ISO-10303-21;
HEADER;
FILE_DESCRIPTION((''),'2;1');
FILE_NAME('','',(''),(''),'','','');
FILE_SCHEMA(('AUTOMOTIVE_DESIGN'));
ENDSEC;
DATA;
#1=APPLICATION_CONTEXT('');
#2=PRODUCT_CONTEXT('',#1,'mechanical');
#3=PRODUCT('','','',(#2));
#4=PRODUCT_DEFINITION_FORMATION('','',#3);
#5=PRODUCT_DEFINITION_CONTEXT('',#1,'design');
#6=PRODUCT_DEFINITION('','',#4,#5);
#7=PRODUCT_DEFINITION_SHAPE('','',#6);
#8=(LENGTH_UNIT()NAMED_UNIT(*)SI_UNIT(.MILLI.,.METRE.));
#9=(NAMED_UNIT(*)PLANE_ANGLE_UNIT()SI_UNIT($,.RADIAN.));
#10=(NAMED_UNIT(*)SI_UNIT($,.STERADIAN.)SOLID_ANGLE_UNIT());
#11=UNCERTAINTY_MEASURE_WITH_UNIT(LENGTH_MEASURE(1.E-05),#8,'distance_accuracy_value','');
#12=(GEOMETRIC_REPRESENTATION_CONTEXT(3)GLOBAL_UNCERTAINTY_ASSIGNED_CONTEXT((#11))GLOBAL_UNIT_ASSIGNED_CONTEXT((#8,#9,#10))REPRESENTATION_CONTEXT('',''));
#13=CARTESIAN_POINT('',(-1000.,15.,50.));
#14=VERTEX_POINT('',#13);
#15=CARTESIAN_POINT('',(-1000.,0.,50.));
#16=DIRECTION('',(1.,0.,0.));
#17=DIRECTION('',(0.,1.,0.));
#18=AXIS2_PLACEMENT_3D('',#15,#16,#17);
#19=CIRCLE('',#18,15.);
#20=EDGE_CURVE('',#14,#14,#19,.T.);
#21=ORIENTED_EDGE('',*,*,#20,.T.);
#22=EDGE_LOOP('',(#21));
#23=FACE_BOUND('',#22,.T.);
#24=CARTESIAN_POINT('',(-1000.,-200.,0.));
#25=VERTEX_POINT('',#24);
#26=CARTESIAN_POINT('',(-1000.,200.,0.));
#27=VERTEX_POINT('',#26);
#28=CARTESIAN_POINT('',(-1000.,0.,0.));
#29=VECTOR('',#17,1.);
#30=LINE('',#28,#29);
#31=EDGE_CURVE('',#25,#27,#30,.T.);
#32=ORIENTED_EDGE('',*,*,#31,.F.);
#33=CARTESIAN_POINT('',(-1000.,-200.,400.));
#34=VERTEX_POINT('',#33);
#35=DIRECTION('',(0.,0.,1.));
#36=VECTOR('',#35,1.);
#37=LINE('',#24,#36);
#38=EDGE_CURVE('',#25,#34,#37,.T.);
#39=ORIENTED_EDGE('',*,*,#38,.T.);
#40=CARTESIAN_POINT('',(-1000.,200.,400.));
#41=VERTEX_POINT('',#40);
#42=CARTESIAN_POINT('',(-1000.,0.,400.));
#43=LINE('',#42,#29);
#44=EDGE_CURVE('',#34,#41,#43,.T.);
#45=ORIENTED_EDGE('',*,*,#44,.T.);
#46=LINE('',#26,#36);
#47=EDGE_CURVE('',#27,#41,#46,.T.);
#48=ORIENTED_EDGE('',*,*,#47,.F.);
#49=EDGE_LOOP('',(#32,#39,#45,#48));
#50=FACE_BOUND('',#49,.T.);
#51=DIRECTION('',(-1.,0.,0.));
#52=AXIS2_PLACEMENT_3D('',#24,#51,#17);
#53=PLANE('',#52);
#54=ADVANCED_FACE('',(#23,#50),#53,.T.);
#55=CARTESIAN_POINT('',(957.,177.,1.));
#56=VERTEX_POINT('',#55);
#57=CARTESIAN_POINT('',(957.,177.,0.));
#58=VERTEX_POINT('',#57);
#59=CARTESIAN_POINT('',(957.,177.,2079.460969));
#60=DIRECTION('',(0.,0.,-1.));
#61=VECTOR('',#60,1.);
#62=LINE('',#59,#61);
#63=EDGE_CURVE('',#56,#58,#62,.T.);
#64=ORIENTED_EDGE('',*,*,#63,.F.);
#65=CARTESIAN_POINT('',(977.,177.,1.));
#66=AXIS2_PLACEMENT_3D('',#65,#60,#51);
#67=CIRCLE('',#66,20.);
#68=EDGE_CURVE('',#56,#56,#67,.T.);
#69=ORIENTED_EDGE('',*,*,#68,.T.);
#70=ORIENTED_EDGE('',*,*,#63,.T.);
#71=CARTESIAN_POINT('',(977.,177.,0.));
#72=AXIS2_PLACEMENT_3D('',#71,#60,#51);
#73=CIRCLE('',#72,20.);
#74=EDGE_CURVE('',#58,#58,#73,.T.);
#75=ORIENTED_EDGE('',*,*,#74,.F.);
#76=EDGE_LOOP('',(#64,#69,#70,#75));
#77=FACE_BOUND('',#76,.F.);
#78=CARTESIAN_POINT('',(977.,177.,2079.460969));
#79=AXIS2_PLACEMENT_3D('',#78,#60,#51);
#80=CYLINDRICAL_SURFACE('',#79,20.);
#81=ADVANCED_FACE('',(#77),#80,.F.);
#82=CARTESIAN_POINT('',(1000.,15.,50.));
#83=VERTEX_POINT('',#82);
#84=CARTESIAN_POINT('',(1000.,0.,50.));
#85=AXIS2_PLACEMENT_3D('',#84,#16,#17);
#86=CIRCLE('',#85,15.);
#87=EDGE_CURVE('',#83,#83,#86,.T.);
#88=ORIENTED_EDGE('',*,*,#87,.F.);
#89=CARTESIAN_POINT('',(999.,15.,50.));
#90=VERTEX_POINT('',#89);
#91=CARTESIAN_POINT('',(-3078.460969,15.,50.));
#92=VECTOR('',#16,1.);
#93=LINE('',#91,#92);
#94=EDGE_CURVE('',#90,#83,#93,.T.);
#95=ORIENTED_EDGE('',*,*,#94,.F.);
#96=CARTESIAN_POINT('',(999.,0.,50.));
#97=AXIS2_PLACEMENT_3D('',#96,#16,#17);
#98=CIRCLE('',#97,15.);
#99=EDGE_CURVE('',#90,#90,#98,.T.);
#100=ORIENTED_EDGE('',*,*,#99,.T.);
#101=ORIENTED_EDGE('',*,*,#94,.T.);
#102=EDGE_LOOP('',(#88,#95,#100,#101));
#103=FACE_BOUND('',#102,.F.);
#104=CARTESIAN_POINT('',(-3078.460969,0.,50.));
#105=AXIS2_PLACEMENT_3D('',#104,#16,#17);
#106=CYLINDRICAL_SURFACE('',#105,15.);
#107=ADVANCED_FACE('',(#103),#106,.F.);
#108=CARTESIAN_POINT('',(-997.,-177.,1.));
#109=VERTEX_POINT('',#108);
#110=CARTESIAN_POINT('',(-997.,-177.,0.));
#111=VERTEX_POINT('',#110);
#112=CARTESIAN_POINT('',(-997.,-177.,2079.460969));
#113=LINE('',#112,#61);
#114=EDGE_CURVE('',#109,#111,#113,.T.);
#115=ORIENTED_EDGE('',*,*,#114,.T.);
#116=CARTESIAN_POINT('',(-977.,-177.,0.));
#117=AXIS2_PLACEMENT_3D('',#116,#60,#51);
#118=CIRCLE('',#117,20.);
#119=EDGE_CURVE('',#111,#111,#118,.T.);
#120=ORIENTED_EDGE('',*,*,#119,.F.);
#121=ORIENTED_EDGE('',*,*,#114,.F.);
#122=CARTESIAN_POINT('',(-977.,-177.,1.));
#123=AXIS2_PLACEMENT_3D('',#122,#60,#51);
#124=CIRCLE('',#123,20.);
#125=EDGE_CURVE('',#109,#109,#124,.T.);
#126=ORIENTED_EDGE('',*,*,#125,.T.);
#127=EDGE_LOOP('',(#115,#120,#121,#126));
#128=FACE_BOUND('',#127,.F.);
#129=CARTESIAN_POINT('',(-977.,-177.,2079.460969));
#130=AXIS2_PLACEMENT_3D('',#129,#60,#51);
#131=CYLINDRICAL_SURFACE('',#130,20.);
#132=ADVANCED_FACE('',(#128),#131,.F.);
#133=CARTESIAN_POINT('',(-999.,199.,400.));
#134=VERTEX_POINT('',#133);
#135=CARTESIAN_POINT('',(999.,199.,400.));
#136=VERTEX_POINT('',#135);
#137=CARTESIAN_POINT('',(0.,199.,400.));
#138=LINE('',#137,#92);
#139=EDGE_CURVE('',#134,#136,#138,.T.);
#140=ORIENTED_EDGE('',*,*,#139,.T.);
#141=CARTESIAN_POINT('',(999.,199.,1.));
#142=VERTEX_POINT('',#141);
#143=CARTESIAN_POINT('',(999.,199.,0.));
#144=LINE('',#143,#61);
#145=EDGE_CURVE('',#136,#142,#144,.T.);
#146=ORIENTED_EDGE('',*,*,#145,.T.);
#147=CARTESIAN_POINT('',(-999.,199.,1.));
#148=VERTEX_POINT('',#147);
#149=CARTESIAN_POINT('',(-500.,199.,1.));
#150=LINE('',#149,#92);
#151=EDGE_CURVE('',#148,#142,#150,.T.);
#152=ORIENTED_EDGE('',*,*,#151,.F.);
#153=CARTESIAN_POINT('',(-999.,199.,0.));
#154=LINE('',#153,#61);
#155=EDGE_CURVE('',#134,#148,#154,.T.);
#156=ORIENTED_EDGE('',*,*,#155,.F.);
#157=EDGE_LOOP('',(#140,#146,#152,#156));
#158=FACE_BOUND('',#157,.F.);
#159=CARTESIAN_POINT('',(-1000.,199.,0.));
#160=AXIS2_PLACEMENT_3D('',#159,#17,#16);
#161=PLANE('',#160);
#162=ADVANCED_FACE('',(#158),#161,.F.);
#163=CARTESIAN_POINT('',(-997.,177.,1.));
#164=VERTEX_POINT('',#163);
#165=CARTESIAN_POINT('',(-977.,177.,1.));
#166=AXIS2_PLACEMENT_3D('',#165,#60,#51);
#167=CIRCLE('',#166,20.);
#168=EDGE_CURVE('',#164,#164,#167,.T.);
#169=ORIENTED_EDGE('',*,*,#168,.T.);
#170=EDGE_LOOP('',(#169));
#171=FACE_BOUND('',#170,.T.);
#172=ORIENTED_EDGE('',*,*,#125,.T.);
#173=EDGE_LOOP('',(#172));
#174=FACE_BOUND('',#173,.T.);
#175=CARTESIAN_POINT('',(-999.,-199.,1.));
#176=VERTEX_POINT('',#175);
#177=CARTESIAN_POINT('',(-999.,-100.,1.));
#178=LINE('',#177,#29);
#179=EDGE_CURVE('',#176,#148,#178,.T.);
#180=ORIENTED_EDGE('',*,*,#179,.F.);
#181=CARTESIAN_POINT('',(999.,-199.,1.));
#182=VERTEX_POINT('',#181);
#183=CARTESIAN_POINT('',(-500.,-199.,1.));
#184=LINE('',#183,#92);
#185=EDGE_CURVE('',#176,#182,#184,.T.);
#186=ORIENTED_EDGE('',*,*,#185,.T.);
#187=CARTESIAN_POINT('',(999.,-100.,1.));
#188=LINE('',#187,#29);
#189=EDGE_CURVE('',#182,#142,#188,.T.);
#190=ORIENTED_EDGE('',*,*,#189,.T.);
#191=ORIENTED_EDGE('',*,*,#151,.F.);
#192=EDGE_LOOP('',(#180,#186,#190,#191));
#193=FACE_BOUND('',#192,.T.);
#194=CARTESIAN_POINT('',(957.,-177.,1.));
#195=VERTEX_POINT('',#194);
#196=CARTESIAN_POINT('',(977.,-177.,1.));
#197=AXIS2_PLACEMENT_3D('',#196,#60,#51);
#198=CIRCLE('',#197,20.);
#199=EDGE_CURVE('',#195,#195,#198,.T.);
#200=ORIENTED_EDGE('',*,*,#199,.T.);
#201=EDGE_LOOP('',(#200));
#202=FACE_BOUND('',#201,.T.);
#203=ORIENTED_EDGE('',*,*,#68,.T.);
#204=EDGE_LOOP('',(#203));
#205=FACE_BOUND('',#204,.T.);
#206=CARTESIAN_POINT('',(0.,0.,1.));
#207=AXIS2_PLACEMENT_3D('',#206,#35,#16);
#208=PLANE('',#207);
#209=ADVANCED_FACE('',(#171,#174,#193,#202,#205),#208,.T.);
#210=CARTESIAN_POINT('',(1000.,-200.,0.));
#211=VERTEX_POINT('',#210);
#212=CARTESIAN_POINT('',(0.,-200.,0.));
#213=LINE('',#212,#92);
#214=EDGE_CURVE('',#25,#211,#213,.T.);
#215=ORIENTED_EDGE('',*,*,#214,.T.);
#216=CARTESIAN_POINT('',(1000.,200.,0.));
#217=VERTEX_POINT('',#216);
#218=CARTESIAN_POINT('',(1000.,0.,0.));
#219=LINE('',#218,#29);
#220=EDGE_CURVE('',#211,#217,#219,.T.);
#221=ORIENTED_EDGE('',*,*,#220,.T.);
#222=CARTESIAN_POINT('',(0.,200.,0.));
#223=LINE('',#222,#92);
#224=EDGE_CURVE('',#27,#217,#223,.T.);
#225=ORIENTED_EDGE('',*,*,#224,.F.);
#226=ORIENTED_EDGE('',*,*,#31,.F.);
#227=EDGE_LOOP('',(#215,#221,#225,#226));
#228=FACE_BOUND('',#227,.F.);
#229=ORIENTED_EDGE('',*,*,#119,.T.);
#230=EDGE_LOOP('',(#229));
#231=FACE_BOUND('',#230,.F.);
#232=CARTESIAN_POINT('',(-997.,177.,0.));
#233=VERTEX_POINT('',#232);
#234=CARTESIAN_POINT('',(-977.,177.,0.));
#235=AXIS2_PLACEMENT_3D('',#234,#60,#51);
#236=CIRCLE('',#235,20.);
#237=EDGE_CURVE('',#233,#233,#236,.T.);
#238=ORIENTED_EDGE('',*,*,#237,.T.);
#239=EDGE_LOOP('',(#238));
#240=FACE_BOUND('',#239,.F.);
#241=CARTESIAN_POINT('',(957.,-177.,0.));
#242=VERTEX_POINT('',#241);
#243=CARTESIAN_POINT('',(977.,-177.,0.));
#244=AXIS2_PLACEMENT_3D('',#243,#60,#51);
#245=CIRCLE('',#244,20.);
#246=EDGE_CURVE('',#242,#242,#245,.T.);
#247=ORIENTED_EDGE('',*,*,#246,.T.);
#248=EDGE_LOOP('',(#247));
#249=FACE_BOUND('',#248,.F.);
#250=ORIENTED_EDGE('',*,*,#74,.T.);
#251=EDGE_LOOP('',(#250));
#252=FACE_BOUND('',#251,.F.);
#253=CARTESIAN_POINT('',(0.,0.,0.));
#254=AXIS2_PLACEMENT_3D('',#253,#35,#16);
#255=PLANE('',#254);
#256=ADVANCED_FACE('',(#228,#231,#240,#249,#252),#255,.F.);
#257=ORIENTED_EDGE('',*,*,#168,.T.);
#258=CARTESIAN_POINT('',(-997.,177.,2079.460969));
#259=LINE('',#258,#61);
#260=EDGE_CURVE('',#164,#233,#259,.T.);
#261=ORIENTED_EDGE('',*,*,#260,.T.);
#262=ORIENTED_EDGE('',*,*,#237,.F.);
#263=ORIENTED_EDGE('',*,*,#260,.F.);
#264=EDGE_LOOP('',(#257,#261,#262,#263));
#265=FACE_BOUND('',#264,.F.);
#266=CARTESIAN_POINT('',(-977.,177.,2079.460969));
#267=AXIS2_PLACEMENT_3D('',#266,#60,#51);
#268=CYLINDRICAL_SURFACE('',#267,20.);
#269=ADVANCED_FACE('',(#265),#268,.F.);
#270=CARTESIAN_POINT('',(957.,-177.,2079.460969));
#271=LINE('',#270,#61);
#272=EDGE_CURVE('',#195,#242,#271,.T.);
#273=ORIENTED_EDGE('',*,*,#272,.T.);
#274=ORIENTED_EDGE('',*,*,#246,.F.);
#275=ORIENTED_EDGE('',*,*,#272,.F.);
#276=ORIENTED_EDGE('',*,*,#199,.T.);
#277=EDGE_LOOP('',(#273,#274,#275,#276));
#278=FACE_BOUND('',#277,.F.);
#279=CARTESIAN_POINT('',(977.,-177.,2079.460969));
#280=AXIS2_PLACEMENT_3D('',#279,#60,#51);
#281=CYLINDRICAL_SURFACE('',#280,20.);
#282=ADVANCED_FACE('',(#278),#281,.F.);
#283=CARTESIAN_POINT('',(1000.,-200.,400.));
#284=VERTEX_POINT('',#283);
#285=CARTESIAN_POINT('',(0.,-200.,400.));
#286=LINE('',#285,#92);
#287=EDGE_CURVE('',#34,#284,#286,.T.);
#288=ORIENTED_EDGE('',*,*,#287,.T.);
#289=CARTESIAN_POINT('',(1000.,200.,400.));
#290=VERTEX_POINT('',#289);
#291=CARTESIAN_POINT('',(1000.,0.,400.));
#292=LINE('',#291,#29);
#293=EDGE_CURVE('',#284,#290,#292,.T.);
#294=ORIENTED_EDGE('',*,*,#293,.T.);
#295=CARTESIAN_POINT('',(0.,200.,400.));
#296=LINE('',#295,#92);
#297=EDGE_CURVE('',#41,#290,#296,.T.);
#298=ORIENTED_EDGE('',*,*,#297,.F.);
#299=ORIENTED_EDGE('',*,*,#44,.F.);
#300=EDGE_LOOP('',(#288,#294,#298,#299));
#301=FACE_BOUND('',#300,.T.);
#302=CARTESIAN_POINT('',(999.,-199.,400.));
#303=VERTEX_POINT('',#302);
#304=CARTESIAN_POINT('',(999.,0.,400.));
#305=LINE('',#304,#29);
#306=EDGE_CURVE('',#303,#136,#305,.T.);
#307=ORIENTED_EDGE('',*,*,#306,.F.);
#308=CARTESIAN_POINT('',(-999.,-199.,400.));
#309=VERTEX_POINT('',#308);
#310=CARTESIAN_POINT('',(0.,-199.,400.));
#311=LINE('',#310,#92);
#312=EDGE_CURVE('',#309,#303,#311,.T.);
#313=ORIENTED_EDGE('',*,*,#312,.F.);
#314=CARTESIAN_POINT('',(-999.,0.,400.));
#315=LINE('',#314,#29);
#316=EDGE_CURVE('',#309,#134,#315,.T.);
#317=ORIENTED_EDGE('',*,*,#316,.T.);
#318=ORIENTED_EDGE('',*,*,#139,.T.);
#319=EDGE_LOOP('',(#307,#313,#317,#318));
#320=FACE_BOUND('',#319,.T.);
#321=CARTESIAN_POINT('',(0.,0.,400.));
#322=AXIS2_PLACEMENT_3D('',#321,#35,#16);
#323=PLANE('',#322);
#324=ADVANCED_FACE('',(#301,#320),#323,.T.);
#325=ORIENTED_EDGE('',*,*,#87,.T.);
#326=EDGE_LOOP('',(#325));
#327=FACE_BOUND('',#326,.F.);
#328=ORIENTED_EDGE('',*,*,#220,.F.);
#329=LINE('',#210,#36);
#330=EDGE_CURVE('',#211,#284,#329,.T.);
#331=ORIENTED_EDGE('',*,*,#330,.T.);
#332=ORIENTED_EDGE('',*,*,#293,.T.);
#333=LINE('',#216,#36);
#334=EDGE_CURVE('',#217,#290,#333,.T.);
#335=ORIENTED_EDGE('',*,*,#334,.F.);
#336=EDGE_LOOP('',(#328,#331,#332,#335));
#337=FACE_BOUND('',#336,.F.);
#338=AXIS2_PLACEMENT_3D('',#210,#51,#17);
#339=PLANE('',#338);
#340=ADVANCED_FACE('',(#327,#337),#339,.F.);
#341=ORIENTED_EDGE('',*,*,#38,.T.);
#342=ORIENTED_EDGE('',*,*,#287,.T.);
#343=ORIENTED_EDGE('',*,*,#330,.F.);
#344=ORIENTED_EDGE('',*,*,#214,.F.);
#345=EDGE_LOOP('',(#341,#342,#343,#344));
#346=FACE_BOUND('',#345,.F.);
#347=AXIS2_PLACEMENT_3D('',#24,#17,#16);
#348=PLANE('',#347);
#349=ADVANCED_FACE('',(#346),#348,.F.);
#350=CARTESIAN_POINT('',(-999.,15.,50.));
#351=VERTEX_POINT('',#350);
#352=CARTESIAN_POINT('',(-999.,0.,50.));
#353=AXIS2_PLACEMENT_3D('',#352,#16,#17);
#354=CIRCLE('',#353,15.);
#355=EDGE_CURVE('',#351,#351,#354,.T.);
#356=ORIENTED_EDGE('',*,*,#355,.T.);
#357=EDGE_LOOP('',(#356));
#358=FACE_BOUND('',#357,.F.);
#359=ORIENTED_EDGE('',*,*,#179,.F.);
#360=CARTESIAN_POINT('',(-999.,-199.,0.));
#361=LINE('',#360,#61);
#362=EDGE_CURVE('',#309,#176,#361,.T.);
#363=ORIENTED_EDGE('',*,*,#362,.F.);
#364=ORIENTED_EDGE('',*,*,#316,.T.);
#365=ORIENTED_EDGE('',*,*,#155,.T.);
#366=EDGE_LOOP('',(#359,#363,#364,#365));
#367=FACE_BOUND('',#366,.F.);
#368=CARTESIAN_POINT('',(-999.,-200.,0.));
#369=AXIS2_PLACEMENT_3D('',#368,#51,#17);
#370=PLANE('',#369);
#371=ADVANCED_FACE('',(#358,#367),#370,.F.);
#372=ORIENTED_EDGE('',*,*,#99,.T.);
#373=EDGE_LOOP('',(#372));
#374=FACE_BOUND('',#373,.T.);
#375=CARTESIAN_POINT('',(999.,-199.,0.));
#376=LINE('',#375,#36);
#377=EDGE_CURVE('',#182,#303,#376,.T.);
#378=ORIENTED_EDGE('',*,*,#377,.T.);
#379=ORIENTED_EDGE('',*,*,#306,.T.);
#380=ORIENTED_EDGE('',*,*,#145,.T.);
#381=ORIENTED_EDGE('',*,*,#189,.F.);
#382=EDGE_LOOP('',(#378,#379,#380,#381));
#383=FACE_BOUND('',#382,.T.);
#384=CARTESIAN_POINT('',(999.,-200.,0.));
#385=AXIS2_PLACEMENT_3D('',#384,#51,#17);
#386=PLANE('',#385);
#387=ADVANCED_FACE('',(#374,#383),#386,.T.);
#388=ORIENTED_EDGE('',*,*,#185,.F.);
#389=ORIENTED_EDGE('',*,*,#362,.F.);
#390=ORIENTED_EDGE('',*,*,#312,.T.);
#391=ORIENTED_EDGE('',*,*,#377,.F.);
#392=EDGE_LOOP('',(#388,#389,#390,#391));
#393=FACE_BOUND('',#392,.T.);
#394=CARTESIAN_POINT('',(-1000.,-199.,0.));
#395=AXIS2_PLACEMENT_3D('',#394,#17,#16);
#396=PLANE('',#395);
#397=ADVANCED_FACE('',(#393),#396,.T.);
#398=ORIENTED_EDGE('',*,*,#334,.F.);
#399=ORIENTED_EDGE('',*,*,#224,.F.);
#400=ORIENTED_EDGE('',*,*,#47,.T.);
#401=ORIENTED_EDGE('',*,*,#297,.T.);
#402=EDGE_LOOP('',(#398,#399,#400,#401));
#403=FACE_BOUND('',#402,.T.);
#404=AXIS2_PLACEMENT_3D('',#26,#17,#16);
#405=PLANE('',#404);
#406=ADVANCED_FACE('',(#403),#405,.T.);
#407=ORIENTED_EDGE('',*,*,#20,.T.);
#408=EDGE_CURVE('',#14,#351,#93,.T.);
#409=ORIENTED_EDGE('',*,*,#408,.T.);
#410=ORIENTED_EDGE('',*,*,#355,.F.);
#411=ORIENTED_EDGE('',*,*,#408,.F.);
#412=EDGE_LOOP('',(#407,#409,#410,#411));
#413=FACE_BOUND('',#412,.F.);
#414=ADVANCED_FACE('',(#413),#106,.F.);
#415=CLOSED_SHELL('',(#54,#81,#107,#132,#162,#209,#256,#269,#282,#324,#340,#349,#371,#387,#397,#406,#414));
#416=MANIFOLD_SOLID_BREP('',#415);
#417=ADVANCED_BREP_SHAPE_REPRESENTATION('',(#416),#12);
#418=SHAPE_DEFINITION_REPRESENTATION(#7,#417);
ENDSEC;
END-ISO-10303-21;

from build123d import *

# Parameters (mm, degrees)
F0_W     = 2000
F0_H     = 400
F1_DEPTH = 400
F2_T     = -1
F5_D     = 40
F8_D     = 30


# Not quite as in the source:
# - the program builds the solid bodies; features that only make, move or delete a surface that nothing else refers to are left out


with BuildPart() as f1:
    # F0 (on Top) → F1 (new body)
    with BuildSketch(Plane.XY):
        Rectangle(F0_W, F0_H)
    extrude(amount=F1_DEPTH)

    # F2
    f2_openings = [f1.faces().sort_by_distance(p)[0] for p in [
        (0, 0, 400),
    ]]
    offset(amount=F2_T, openings=f2_openings)

    # F5 (through all)
    with Locations(Plane.XY.offset(1)):
        with Locations((977, 177), (977, -177), (-977, 177), (-977, -177)):
            Hole(F5_D / 2)

    # F8 (through all)
    with Locations(Plane(origin=(-1000, 0, 0), x_dir=(0, -1, 0), z_dir=(-1, 0, 0))):
        with Locations((0, 50)):
            Hole(F8_D / 2)


solid = f1.part
